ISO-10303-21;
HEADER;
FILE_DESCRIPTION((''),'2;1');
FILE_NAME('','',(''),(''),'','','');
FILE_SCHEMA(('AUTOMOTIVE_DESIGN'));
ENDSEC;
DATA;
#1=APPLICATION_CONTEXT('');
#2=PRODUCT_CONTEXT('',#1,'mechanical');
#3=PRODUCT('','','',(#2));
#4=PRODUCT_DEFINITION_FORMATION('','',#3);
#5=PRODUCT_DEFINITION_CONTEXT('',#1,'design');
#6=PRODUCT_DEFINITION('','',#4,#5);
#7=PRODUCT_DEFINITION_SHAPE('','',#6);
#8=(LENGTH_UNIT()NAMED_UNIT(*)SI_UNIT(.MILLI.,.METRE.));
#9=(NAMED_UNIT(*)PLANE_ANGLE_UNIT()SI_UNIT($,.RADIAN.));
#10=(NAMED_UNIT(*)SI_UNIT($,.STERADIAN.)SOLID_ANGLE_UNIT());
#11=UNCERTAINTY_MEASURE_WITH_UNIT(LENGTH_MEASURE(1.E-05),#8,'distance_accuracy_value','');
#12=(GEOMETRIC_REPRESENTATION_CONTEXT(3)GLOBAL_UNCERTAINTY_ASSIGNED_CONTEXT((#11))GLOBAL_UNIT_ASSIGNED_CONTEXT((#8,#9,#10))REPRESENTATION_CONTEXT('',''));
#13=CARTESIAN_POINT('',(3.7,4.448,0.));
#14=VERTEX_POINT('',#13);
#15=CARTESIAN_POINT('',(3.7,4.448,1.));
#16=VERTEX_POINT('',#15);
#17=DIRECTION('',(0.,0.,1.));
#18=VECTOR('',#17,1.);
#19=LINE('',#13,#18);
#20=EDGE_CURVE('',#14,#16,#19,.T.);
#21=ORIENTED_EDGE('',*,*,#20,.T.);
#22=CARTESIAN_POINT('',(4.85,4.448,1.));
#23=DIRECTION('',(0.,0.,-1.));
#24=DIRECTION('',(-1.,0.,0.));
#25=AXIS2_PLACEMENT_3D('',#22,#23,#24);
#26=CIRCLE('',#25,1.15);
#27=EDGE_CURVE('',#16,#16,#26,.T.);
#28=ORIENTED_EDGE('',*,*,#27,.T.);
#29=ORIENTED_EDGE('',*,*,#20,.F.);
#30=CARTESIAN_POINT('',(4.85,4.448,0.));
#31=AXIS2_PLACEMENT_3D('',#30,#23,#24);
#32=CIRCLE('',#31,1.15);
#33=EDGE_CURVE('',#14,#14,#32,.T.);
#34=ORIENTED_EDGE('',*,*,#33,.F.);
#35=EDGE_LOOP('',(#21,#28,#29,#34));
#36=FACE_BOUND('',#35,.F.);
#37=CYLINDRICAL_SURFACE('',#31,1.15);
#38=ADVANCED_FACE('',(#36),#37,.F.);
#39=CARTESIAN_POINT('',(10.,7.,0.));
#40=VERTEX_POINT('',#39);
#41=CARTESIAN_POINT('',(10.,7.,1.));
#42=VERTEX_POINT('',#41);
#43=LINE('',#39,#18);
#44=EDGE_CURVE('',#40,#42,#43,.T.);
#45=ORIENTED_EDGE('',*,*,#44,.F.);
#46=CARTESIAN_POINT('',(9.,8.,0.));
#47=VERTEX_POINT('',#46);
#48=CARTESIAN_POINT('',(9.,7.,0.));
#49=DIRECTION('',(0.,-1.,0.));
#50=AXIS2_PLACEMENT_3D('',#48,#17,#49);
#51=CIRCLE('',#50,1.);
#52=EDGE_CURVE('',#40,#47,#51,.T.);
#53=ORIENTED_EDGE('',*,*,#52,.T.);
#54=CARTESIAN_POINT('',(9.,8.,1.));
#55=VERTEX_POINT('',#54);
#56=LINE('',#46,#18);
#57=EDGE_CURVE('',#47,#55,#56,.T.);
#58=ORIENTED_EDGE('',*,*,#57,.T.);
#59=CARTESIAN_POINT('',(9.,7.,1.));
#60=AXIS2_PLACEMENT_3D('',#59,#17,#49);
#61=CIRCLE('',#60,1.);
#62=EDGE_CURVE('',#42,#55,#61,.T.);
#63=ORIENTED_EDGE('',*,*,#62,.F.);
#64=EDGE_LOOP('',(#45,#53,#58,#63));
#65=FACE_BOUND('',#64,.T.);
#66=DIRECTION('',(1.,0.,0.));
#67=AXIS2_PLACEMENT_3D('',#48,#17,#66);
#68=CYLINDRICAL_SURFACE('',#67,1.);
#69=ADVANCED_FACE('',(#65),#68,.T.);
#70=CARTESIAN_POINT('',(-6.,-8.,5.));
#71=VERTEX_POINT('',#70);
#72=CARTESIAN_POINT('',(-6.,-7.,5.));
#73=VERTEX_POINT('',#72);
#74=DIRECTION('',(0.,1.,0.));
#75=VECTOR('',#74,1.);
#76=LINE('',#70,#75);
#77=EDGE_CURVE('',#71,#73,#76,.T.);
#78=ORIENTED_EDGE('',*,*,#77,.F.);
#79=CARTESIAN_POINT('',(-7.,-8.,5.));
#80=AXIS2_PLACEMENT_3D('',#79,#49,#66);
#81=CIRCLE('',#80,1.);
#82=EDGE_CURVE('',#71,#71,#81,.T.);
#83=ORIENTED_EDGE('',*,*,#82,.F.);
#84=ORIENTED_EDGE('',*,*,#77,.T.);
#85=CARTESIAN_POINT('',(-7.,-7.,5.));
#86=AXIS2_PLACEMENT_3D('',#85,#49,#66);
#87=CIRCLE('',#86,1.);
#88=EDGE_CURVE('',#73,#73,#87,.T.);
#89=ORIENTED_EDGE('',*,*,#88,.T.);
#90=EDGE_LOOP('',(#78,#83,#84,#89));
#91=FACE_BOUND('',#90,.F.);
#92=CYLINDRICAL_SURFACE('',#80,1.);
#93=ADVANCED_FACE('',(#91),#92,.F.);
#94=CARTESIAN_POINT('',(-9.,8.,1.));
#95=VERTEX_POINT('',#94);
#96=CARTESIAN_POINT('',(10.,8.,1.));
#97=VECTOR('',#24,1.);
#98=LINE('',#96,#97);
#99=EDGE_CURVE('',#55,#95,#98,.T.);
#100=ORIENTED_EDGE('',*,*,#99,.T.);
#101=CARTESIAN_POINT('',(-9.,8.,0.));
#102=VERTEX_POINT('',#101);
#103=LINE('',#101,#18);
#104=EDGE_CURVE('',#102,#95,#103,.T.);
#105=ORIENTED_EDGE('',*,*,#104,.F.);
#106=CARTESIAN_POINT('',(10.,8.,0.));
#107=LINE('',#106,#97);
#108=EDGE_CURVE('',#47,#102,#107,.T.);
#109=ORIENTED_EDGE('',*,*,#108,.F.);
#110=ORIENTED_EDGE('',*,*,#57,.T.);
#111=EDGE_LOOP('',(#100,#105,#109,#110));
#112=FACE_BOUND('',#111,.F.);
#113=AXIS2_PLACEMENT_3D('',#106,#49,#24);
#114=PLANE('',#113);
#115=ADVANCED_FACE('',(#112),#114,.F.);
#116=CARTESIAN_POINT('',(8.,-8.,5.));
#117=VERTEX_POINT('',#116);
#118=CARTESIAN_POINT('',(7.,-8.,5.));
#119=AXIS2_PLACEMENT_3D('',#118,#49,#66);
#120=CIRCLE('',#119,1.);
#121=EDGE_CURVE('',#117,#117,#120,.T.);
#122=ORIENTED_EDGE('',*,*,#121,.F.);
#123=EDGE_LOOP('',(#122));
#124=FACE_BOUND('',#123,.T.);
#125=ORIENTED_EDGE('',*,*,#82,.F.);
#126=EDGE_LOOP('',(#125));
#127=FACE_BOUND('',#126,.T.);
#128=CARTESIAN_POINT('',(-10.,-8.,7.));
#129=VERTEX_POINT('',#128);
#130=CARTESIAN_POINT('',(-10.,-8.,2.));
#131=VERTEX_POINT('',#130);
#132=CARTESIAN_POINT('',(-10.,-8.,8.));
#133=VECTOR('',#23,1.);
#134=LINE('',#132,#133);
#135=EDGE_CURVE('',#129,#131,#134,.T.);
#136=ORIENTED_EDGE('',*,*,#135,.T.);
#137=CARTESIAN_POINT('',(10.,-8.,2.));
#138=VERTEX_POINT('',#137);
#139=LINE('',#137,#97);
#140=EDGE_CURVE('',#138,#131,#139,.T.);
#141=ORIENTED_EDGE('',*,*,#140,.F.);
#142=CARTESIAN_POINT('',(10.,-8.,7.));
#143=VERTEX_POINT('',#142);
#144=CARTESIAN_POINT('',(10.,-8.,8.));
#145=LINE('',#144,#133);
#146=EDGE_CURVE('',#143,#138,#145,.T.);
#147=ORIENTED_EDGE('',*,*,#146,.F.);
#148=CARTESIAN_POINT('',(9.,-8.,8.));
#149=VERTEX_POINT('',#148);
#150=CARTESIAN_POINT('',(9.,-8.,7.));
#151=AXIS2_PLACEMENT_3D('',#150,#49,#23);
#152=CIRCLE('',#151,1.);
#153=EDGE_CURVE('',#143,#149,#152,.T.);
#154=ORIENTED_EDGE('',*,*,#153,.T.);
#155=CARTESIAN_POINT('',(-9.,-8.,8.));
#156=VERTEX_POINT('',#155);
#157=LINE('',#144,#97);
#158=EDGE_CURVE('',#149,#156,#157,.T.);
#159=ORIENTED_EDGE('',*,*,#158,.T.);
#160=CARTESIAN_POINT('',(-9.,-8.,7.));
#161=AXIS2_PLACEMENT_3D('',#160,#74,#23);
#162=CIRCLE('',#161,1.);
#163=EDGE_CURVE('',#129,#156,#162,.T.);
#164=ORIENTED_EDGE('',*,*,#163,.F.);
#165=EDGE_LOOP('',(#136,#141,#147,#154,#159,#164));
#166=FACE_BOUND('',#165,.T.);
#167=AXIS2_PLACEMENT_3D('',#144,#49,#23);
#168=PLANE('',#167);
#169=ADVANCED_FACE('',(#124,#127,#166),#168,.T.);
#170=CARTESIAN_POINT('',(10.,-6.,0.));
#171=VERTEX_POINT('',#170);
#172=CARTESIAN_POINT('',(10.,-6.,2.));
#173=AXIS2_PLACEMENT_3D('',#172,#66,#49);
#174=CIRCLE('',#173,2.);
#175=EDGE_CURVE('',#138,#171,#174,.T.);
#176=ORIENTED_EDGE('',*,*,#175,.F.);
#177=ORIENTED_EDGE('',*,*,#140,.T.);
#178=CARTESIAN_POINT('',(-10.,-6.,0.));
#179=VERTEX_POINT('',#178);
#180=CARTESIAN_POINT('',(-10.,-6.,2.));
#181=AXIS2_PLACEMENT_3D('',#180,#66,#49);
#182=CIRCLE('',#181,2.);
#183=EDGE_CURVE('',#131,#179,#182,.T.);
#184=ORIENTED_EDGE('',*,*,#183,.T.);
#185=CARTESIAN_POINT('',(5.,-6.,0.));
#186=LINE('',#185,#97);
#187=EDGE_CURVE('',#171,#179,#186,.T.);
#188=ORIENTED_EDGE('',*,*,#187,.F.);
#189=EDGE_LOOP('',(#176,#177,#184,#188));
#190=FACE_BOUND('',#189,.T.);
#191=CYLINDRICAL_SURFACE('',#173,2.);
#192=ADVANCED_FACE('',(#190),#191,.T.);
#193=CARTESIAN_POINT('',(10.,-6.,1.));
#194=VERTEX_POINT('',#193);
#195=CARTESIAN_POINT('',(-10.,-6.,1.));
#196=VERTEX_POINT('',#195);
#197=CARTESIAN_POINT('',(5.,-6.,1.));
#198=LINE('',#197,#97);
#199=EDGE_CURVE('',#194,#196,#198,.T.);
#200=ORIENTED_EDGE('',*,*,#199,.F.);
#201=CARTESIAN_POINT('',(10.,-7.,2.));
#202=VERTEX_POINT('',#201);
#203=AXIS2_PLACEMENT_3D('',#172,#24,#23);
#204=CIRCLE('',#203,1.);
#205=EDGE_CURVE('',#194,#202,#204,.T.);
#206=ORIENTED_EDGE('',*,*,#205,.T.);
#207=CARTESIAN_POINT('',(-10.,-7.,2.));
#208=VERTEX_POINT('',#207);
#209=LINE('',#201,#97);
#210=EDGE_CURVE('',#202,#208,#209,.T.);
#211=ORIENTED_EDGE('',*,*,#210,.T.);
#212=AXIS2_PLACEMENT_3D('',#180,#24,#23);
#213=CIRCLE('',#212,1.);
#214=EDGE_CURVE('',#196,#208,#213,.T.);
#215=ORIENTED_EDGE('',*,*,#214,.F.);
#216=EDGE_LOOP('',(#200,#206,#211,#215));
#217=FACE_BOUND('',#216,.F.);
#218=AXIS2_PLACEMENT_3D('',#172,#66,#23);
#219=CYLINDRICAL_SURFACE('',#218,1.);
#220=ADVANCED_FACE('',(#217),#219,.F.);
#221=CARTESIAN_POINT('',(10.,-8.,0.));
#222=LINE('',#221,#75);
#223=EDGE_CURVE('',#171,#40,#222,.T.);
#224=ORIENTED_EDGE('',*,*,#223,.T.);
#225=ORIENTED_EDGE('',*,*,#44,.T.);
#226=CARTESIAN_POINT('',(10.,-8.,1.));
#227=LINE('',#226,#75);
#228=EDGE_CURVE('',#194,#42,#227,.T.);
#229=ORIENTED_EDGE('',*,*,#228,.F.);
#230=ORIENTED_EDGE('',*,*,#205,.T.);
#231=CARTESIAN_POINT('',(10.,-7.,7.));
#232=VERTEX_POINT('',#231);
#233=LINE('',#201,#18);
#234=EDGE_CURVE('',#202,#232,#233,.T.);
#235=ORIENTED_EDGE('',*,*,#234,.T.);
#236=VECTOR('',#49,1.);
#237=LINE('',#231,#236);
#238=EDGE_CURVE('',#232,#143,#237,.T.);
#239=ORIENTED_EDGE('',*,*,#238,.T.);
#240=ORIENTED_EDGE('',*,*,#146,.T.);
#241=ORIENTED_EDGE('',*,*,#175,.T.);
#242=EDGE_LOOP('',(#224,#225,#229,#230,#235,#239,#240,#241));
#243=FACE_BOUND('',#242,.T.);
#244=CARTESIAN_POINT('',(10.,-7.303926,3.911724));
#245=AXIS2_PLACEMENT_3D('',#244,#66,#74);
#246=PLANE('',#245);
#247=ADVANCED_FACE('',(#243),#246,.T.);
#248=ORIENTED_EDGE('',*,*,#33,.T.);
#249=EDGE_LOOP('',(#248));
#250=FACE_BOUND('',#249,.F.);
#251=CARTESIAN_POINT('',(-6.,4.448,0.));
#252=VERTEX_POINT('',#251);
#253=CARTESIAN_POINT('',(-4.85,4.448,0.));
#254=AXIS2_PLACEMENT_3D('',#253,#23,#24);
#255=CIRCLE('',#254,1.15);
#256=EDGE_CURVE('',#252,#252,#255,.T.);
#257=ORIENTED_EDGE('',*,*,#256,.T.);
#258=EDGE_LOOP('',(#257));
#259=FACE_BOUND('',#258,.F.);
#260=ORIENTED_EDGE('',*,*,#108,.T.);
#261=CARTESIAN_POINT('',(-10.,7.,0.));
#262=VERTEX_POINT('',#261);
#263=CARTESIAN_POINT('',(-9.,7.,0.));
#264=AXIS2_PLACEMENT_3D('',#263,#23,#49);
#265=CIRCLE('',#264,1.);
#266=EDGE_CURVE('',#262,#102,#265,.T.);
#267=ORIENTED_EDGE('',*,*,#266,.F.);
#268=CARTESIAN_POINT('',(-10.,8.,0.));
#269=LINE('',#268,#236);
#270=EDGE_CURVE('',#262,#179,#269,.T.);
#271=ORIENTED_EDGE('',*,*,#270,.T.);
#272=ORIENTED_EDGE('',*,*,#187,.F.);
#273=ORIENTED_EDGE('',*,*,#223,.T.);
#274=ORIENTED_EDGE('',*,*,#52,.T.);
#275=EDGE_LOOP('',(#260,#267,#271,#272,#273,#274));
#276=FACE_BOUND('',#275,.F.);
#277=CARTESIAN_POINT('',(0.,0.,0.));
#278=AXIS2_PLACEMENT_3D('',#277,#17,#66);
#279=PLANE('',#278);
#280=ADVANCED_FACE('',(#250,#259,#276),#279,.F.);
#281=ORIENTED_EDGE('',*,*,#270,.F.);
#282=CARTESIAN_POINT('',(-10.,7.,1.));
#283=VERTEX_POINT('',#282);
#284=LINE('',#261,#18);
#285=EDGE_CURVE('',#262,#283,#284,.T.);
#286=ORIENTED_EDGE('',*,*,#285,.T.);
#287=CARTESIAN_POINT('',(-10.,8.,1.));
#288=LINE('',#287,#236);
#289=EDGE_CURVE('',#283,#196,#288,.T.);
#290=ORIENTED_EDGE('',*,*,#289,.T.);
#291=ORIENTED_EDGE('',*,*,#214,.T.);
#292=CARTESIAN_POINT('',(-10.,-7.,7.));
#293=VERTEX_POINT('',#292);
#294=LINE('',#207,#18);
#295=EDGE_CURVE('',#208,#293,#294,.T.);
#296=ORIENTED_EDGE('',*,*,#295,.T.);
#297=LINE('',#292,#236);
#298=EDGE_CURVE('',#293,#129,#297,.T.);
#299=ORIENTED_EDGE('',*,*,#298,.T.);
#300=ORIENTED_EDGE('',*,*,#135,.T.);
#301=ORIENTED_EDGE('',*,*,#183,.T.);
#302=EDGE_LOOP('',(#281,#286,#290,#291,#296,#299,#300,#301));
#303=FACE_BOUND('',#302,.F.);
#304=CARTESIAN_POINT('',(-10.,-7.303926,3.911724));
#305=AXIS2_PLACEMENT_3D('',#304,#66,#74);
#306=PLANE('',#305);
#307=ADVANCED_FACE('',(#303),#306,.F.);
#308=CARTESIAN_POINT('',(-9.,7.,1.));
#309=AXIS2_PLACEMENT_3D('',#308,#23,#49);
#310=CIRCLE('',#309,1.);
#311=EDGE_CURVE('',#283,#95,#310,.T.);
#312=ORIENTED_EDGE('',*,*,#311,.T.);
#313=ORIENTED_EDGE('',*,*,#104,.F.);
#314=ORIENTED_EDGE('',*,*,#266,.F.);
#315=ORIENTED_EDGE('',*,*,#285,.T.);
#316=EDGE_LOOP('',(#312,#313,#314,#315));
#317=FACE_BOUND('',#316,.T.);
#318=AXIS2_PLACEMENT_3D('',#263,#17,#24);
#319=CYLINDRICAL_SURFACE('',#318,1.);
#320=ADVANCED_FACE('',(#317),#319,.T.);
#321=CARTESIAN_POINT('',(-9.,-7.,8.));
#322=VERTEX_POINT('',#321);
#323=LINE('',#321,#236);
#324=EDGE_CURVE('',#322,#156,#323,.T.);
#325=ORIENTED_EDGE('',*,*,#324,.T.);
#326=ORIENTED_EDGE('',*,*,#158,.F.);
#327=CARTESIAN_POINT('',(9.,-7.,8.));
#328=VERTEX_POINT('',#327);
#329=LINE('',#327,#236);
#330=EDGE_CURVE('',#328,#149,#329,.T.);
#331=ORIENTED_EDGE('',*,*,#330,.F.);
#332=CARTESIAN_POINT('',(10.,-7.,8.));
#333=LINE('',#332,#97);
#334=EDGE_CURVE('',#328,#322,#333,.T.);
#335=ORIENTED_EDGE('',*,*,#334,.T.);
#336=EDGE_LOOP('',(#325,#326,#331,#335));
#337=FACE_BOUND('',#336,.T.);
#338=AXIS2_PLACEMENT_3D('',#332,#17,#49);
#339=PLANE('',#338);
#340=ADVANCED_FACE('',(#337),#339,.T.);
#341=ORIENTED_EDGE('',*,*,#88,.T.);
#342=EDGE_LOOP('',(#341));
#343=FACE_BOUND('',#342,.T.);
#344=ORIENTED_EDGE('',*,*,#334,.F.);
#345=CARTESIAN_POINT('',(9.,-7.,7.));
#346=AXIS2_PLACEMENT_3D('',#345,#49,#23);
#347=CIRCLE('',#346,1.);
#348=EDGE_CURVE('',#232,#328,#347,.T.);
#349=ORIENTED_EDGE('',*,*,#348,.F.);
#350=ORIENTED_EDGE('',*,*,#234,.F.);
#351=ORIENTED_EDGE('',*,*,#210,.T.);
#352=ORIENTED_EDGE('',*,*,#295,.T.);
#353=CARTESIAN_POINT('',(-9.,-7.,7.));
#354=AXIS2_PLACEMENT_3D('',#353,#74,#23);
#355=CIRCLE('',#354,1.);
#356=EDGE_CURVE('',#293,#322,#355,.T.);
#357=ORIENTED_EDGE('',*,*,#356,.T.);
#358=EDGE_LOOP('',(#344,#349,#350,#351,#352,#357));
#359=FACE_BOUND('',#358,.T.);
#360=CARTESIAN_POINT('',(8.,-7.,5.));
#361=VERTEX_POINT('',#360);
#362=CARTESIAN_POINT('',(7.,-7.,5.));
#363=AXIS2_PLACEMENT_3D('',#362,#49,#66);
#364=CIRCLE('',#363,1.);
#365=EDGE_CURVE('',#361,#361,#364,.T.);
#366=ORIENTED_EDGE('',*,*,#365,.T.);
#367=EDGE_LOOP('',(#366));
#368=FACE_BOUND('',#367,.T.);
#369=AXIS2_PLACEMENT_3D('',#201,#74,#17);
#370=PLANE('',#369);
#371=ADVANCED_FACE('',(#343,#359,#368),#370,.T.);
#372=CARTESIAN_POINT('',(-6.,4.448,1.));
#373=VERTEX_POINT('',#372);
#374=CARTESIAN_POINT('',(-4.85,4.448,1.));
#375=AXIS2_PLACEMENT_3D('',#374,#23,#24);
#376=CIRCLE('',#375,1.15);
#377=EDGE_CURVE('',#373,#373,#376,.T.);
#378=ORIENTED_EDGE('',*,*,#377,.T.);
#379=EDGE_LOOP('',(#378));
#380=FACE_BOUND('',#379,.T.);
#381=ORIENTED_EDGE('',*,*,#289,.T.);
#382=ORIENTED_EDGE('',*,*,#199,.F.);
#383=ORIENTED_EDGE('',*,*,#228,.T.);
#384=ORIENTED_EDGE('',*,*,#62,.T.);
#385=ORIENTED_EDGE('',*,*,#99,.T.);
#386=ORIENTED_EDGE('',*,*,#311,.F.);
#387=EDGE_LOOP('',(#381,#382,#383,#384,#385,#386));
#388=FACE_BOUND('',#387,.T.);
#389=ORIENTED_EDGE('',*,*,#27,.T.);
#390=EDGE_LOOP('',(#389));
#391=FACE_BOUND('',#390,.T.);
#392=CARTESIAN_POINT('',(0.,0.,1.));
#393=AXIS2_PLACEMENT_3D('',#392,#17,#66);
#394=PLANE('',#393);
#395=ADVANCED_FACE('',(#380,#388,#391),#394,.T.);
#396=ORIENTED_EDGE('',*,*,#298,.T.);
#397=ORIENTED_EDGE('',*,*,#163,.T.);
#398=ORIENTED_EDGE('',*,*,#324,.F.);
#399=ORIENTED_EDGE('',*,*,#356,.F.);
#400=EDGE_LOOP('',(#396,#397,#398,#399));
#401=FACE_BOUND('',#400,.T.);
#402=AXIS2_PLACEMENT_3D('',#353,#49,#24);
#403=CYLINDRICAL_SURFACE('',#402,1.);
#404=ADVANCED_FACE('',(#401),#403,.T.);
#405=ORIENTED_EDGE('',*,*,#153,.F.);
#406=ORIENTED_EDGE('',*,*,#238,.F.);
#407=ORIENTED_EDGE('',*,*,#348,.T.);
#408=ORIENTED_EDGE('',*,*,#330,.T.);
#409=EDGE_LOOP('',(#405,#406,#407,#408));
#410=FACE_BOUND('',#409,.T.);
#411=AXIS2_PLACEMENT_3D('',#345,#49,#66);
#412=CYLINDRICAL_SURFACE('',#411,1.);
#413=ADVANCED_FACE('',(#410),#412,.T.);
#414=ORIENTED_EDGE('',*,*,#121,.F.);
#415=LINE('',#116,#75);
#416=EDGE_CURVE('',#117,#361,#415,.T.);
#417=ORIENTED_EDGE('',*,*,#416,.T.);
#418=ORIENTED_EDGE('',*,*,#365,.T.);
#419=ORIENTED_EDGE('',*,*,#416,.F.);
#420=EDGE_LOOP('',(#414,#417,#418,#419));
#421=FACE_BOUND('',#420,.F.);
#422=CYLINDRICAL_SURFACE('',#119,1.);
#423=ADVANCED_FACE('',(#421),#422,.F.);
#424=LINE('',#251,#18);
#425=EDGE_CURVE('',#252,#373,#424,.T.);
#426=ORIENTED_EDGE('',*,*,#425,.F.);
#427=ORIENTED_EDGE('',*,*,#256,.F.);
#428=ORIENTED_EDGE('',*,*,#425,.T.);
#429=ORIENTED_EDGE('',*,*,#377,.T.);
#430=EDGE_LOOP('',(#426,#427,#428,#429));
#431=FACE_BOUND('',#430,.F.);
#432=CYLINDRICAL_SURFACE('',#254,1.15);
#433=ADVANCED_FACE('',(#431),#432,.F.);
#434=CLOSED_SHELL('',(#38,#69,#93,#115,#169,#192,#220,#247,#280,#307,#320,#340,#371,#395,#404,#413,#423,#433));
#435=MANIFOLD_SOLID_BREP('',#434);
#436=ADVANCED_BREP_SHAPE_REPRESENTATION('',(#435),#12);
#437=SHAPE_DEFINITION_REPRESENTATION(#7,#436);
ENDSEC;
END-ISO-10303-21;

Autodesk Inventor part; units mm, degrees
ref_plane "YZ Plane" through (0, 0, 0) normal (1, 0, 0) x (0, 1, 0)
ref_plane "XZ Plane" through (0, 0, 0) normal (0, 1, 0) x (-1, 0, 0)
ref_plane "XY Plane" through (0, 0, 0) normal (0, 0, 1) x (1, 0, 0)
sketch "Base" plane through (0, 0, 0) normal (0, 0, 1) x (1, 0, 0)
  line L0 (-10, -8) -> (10, -8)
  line L1 (10, -8) -> (10, 8)
  line L2 (10, 8) -> (-10, 8)
  line L3 (-10, 8) -> (-10, -8)
  line L4 (-10, -8) -> (10, 8) construction
  line L5 (10, -8) -> (-10, 8) construction
  point P0 (0, 0)
  dimension "d0" = 20
  dimension "d1" = 16
extrude "Plate1" add sketch "Base" along normal blind 1
sketch "Sketch2" plane through (10, -7, 0) normal (0, -1, 0) x (1, 0, 0)
  line L0 (-20, 0) -> (0, 0)
  line L1 (0, 0) -> (0, 8)
  line L2 (0, 8) -> (-20, 8)
  line L3 (-20, 8) -> (-20, 0)
edge flange "MountFeature" height 8 angle 90 thickness 1 bend radius 1 thickness toward (0, -1, 0) relief tear relief width 1 relief depth 0.5 edges at (0, -8, 1) wall of the first edge with corners at (-10, -7, 0) (10, -7, 0) (10, -7, 8) (-10, -7, 8)
bend "Bend1"
corner "Corner1"
sketch "MountHoles" plane through (0, 0, 0) normal (0, 0, -1) x (-1, 0, 0)
  circle A0 centre (4.85, 4.448) radius 1.15 projected
  circle A1 centre (-4.85, 4.448) radius 1.15 projected
  point P0 (0, 0)
extrude "MountHolesFeature" cut sketch "MountHoles" against normal blind 1
fillet "EdgeFilletsFeature" radius 1 4 edges at (10, 8, 0.5) (-10, 8, 0.5) (-10, -7.5, 8) (10, -7.5, 8)
sketch "ArmMountHoles" plane through (-10, -8, 2) normal (0, -1, 0) x (1, 0, 0)
  line L0 (0, 3) -> (20, 3) construction
  line L1 (10, -3.8) -> (10, 8.8) construction
  circle A0 centre (3, 3) radius 1
  circle A1 centre (17, 3) radius 1
  line L2 (1, 6) -> (19, 6) projected
  line L3 (20, 0) -> (20, 5) projected
  line L4 (0, 0) -> (0, 5) projected
  point P0 (10, -2)
  dimension "d17" = 2
  dimension "d20" = 3
extrude "ArmMountHolesFeature" cut sketch "ArmMountHoles" against normal blind 1
equation "\"d13\" = Thickness"
equation "\"d18\" = Thickness"
equation "\"d2\" = Thickness"
equation "\"d3\" = BendReliefWidth"
equation "\"d4\" = BendReliefDepth"
equation "\"d5\" = MinimumRemnant"
equation "\"d6\" = TransitionRadius"
equation "\"d9\" = BendRadius"
equation "\"d10\" = CornerReliefSize"
equation "\"d11\" = GapSize"
equation "\"d12\" = JacobiRadiusSize"
equation "\"BendRadius\" = Thickness"
equation "\"BendReliefWidth\" = Thickness"
equation "\"BendReliefDepth\" = 0.5 * Thickness"
equation "\"CornerReliefSize\" = 4 * Thickness"
equation "\"MinimumRemnant\" = 2 * Thickness"
equation "\"TransitionRadius\" = BendRadius"
equation "\"JacobiRadiusSize\" = BendRadius"
equation "\"GapSize\" = Thickness"
equation "\"Thickness\" = 1"
properties part number "LimitSwitchMount"
